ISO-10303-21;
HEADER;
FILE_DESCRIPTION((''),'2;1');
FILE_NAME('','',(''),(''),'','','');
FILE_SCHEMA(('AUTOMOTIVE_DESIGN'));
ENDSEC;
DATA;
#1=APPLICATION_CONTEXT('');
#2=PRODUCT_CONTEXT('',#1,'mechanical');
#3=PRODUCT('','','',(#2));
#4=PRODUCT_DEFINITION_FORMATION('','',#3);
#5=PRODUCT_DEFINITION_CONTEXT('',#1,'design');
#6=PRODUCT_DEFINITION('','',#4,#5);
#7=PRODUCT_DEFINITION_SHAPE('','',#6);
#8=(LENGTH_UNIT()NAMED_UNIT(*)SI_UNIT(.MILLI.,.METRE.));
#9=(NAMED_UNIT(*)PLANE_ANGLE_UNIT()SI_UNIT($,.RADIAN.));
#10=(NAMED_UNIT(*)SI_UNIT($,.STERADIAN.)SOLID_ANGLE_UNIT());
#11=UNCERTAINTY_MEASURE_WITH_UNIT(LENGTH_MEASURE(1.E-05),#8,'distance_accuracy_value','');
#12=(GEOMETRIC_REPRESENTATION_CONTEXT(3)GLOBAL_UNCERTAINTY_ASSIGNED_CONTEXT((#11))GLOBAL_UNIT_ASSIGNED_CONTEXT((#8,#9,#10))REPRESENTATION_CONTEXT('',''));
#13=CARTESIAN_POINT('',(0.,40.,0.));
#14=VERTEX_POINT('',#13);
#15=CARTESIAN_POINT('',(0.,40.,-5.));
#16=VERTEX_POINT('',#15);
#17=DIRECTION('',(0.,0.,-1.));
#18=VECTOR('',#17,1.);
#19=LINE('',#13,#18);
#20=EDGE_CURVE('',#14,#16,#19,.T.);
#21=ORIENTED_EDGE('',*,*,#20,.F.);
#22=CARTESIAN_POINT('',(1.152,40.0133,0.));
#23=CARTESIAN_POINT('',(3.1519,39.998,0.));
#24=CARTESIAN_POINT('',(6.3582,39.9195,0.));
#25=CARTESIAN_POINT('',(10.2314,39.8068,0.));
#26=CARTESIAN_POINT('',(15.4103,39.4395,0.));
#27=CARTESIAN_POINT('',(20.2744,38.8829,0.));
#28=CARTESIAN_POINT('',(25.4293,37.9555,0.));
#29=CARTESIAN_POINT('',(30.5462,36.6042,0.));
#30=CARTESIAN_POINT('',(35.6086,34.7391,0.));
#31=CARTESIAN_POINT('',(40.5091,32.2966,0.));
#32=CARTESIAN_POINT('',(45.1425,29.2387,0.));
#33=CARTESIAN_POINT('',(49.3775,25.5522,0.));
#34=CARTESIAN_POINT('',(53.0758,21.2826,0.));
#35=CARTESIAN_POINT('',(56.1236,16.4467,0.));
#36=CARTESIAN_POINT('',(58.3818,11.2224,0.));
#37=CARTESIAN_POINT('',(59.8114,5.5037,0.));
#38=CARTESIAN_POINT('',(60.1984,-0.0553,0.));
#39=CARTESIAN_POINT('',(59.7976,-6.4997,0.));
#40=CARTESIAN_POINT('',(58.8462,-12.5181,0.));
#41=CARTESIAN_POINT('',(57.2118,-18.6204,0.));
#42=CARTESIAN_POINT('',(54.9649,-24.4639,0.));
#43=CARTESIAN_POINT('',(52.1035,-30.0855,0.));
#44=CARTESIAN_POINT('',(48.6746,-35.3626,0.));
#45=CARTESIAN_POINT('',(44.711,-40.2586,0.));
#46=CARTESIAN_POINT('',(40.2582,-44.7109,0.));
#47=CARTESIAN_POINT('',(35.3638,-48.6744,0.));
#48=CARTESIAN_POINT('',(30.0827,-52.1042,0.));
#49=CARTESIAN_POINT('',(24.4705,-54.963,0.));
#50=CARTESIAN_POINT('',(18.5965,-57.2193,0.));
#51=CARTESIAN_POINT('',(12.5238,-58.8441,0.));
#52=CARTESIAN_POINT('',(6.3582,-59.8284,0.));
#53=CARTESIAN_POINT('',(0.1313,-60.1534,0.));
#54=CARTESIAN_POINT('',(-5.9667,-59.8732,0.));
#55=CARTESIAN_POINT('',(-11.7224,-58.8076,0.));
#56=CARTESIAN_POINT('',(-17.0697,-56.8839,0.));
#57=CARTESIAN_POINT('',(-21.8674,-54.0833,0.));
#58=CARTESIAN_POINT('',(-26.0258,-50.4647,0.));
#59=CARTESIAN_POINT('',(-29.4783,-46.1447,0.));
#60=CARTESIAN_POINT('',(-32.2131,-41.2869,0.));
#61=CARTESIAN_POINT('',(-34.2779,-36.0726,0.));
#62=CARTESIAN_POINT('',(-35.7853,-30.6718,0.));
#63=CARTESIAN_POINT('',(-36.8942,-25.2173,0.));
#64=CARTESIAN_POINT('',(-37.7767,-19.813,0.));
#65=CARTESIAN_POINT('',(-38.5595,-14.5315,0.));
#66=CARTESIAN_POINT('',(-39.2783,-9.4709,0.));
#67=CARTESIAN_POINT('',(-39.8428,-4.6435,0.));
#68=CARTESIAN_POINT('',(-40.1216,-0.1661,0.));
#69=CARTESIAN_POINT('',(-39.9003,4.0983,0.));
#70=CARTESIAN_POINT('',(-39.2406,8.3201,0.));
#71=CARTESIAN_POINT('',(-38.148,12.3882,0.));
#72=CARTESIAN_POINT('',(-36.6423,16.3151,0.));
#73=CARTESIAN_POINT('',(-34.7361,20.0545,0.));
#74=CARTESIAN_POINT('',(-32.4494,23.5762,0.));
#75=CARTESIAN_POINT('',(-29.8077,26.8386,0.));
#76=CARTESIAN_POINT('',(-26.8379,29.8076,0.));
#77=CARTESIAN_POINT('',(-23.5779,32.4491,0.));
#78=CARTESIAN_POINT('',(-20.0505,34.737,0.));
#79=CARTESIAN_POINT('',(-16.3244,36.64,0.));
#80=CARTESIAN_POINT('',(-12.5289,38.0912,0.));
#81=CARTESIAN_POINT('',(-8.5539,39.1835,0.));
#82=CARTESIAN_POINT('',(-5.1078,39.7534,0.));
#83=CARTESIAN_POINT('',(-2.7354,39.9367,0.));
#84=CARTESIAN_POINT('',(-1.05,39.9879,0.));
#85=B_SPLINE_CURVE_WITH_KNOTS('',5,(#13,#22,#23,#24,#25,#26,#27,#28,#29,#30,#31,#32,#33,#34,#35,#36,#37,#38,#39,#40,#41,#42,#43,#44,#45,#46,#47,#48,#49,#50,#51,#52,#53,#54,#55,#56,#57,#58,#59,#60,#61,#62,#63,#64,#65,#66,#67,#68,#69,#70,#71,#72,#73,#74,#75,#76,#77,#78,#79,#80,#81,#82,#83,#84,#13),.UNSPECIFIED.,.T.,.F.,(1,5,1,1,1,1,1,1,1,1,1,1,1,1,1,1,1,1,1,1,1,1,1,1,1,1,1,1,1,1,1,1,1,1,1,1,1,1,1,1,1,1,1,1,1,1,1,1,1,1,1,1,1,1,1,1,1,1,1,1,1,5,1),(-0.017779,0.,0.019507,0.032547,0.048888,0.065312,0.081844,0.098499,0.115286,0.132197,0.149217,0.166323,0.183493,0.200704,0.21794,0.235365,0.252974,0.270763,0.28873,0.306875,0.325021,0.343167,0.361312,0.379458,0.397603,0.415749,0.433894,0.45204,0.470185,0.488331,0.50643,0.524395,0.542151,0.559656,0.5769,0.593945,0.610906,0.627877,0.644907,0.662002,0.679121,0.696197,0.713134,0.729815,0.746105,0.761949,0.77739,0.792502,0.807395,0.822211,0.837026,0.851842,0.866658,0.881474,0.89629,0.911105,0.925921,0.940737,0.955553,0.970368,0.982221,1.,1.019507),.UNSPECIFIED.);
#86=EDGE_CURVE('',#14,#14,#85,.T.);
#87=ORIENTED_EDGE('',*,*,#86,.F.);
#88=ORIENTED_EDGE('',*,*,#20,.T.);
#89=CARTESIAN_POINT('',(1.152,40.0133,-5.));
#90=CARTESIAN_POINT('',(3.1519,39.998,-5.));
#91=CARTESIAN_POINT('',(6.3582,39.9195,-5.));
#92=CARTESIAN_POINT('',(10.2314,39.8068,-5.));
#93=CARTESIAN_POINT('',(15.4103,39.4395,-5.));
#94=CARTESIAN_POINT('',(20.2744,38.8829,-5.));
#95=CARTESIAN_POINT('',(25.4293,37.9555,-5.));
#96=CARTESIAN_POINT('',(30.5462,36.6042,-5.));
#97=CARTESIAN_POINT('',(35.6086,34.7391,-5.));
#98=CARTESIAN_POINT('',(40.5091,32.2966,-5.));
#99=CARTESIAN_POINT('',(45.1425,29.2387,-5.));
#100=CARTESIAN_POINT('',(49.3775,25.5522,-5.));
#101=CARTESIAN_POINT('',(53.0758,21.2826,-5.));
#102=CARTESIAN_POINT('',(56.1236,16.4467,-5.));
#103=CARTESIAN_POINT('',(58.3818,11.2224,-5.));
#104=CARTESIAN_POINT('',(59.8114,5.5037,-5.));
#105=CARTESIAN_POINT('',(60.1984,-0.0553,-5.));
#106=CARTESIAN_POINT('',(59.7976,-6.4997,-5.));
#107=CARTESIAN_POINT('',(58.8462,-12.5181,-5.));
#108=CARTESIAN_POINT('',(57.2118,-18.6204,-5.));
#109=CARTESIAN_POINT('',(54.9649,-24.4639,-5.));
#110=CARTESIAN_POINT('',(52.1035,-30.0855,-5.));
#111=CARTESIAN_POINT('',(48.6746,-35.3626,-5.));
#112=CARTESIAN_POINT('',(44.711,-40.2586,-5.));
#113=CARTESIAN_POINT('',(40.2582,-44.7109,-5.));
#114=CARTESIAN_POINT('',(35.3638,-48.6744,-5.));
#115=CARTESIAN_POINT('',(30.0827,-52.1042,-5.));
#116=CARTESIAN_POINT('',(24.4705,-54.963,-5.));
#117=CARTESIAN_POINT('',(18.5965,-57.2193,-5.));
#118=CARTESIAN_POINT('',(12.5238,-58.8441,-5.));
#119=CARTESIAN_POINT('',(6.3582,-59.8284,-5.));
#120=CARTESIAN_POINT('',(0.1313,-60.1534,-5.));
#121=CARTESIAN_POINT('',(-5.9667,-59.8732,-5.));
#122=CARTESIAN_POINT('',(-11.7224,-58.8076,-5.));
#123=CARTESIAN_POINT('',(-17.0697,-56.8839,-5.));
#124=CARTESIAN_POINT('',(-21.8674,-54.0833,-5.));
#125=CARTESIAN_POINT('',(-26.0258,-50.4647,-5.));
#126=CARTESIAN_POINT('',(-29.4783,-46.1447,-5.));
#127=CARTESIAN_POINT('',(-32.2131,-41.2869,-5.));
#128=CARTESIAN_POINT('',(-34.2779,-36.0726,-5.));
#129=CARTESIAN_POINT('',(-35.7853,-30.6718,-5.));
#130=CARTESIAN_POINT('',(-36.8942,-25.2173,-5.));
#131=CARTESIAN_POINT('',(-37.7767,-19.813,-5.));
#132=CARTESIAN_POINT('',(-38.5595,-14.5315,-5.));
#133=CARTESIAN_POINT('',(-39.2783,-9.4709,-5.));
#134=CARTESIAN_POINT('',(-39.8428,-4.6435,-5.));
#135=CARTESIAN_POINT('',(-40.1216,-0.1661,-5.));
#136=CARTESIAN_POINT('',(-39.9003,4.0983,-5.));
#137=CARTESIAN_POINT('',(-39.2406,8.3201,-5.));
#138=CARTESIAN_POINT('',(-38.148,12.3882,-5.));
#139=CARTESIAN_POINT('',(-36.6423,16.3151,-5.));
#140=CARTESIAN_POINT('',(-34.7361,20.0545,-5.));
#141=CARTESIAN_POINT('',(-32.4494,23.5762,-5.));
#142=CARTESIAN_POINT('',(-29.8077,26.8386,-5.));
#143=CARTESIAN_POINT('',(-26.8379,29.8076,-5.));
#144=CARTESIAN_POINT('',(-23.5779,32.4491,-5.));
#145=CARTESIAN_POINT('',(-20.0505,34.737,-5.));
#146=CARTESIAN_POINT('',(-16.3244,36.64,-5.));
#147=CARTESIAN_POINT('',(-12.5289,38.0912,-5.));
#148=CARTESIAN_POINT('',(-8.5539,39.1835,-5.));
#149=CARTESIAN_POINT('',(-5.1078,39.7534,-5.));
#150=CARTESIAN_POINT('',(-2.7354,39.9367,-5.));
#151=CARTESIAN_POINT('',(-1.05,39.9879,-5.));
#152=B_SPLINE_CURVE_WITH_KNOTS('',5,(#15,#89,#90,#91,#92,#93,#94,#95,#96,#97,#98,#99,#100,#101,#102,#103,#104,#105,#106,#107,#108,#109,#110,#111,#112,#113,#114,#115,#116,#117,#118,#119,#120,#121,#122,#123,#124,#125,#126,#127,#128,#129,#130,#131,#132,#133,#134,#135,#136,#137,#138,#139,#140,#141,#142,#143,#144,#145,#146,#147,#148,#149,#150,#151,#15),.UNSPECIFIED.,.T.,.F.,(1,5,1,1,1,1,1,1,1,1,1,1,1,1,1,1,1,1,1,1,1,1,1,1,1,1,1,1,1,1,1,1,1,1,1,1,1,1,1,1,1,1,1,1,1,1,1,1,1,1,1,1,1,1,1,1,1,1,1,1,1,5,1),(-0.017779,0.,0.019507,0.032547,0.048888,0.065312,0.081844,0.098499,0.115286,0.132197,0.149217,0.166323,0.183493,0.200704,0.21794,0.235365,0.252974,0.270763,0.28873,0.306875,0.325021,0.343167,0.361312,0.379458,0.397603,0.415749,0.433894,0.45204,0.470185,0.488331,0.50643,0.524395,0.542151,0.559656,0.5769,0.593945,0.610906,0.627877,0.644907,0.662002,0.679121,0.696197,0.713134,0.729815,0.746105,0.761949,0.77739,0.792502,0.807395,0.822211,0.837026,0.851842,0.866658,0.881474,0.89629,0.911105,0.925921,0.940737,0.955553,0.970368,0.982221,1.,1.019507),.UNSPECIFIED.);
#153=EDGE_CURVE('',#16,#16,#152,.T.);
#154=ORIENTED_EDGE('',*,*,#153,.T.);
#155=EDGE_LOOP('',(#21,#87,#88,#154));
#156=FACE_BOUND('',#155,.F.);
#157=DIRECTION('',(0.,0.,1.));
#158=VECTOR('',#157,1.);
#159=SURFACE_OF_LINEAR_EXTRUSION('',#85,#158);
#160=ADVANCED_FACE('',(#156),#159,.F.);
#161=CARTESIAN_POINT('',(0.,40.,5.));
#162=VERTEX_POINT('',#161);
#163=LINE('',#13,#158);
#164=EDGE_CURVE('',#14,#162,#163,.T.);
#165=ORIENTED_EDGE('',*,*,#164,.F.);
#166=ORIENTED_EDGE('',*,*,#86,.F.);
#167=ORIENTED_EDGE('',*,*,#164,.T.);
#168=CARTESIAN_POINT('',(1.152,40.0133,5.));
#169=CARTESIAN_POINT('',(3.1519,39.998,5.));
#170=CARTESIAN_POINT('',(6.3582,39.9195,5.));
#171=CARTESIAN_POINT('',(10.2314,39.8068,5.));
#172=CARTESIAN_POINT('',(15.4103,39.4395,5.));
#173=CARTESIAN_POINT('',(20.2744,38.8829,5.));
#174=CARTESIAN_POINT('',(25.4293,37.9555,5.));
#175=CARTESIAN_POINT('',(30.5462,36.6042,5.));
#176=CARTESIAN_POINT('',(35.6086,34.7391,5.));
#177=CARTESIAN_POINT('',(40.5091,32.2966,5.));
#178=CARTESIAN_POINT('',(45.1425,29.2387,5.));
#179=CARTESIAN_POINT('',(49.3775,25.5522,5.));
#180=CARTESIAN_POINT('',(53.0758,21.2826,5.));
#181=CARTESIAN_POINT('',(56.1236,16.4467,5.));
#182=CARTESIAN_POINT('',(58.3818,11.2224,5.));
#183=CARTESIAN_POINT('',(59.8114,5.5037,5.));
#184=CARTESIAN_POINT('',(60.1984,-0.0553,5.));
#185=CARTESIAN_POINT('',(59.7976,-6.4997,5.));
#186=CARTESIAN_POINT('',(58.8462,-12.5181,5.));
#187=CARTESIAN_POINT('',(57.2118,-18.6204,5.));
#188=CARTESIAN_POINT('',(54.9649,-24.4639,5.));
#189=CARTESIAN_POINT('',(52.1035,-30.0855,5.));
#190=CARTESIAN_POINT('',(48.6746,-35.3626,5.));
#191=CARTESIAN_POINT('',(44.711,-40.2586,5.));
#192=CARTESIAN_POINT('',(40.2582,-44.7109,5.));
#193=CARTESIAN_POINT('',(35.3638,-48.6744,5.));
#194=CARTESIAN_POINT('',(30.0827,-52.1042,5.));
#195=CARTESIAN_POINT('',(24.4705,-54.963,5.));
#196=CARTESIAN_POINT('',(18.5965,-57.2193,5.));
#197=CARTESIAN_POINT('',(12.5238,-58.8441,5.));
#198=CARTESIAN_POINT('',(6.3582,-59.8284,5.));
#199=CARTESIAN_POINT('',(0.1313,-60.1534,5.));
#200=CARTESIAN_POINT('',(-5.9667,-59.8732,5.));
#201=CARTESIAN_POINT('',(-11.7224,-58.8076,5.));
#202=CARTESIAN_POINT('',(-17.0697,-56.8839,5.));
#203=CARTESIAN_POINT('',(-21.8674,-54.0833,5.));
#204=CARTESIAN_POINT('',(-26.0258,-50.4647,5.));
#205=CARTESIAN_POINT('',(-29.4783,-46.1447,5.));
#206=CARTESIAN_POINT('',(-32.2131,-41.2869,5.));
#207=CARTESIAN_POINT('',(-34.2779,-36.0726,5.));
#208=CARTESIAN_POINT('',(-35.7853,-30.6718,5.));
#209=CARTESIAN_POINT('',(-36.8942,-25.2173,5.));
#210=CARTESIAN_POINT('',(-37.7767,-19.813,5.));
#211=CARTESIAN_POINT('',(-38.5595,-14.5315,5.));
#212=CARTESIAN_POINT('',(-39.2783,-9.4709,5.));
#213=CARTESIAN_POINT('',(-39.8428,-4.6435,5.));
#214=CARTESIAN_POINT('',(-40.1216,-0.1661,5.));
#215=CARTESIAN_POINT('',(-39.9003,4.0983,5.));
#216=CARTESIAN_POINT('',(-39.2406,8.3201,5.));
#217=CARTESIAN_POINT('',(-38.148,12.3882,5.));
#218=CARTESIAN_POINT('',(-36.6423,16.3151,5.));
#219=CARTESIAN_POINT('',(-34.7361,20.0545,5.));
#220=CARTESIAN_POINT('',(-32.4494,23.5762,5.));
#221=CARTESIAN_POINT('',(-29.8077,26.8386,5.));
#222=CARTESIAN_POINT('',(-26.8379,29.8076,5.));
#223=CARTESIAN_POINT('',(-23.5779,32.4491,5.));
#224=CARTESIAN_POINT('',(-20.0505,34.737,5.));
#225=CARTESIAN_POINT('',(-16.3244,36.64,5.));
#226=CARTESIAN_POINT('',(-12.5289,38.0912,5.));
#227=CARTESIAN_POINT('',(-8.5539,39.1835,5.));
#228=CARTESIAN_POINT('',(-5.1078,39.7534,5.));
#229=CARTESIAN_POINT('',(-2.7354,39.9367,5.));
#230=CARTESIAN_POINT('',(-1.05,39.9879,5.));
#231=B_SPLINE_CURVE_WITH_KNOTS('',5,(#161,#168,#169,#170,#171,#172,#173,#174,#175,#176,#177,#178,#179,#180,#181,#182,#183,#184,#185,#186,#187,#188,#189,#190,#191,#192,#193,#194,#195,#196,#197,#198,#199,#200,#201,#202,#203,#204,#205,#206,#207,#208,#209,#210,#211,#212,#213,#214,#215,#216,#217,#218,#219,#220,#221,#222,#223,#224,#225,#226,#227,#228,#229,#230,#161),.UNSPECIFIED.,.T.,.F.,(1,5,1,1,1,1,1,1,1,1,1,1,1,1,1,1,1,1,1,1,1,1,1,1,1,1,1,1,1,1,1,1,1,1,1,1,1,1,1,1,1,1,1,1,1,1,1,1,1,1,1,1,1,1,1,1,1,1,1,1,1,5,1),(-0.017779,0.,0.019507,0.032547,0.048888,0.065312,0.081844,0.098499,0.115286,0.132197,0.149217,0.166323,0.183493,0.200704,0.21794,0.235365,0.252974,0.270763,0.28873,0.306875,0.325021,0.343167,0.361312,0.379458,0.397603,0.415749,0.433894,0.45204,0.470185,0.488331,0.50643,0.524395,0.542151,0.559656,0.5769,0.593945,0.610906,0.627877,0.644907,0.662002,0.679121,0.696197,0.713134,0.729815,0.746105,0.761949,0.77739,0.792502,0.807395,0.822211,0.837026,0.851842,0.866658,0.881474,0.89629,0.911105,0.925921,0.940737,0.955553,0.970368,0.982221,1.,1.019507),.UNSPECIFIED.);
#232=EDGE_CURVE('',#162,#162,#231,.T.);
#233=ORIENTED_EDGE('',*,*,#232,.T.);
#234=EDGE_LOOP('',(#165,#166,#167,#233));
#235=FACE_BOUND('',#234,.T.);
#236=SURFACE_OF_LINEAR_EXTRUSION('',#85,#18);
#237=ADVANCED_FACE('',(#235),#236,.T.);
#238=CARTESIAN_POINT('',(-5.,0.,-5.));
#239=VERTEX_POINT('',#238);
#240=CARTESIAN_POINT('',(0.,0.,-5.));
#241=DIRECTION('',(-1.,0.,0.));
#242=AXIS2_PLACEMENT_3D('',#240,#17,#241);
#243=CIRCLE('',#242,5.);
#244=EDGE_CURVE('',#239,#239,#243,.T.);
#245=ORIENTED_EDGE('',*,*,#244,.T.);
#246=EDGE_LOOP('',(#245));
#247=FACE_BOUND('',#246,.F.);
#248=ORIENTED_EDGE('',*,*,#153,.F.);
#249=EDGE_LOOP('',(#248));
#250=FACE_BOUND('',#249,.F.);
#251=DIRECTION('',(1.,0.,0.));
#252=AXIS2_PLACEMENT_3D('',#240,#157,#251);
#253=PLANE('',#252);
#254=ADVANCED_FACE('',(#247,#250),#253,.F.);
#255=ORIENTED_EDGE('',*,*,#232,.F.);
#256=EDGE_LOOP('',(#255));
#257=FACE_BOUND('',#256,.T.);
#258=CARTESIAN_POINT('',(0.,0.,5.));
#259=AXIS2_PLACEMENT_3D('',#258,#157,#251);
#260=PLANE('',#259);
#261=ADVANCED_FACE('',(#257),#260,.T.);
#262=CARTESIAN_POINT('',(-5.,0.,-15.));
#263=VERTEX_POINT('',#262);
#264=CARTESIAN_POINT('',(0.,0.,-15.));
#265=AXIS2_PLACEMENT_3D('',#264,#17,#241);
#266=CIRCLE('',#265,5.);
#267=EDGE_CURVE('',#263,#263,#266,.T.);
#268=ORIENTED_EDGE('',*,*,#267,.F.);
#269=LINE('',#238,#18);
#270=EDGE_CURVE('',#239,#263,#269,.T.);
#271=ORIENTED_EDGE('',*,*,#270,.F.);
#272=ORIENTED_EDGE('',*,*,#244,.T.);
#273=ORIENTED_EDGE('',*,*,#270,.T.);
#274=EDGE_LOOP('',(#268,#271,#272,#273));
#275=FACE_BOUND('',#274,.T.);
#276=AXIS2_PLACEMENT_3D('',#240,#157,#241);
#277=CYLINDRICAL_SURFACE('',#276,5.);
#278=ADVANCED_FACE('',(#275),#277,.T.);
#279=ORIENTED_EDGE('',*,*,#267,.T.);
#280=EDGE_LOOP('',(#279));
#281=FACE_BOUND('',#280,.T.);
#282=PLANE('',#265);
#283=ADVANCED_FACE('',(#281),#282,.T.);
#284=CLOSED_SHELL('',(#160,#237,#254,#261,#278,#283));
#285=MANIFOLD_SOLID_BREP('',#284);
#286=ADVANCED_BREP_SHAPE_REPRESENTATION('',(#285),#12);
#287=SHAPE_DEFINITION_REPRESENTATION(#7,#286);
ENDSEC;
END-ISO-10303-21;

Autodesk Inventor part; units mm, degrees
ref_plane "YZ Plane" through (0, 0, 0) normal (1, 0, 0) x (0, 1, 0)
ref_plane "XZ Plane" through (0, 0, 0) normal (0, 1, 0) x (-1, 0, 0)
ref_plane "XY Plane" through (0, 0, 0) normal (0, 0, 1) x (1, 0, 0)
sketch "主要草圖" plane through (0, 0, 0) normal (0, 0, 1) x (1, 0, 0)
  spline S0 degree 5 poles (0, 40) (1.152, 40.0133) (3.1519, 39.998) (6.3582, 39.9195) (10.2314, 39.8068) (15.4103, 39.4395) (20.2744, 38.8829) (25.4293, 37.9555) (30.5462, 36.6042) (35.6086, 34.7391) (40.5091, 32.2966) (45.1425, 29.2387) (49.3775, 25.5522) (53.0758, 21.2826) (56.1236, 16.4467) (58.3818, 11.2224) (59.8114, 5.5037) (60.1984, -0.0553) (59.7976, -6.4997) (58.8462, -12.5181) (57.2118, -18.6204) (54.9649, -24.4639) (52.1035, -30.0855) (48.6746, -35.3626) (44.711, -40.2586) (40.2582, -44.7109) (35.3638, -48.6744) (30.0827, -52.1042) (24.4705, -54.963) (18.5965, -57.2193) (12.5238, -58.8441) (6.3582, -59.8284) (0.1313, -60.1534) (-5.9667, -59.8732) (-11.7224, -58.8076) (-17.0697, -56.8839) (-21.8674, -54.0833) (-26.0258, -50.4647) (-29.4783, -46.1447) (-32.2131, -41.2869) (-34.2779, -36.0726) (-35.7853, -30.6718) (-36.8942, -25.2173) (-37.7767, -19.813) (-38.5595, -14.5315) (-39.2783, -9.4709) (-39.8428, -4.6435) (-40.1216, -0.1661) (-39.9003, 4.0983) (-39.2406, 8.3201) (-38.148, 12.3882) (-36.6423, 16.3151) (-34.7361, 20.0545) (-32.4494, 23.5762) (-29.8077, 26.8386) (-26.8379, 29.8076) (-23.5779, 32.4491) (-20.0505, 34.737) (-16.3244, 36.64) (-12.5289, 38.0912) (-8.5539, 39.1835) (-5.1078, 39.7534) (-2.7354, 39.9367) (-1.05, 39.9879) (0, 40) knots 0 0 0 0 0 0 0.019507 0.032547 0.048888 0.065312 0.081844 0.098499 0.115286 0.132197 0.149217 0.166323 0.183493 0.200704 0.21794 0.235365 0.252974 0.270763 0.28873 0.306875 0.325021 0.343167 0.361312 0.379458 0.397603 0.415749 0.433894 0.45204 0.470185 0.488331 0.50643 0.524395 0.542151 0.559656 0.5769 0.593945 0.610906 0.627877 0.644907 0.662002 0.679121 0.696197 0.713134 0.729815 0.746105 0.761949 0.77739 0.792502 0.807395 0.822211 0.837026 0.851842 0.866658 0.881474 0.89629 0.911105 0.925921 0.940737 0.955553 0.970368 0.982221 1 1 1 1 1 1
  point P0 (10.067, 39.766)
  point P1 (15.1278, 39.411)
  point P2 (20.2181, 38.8077)
  point P3 (25.3322, 37.8692)
  point P4 (30.4406, 36.5048)
  point P5 (35.4839, 34.6313)
  point P6 (40.3726, 32.1829)
  point P7 (44.9919, 29.1205)
  point P8 (49.2108, 25.4387)
  point P9 (52.8936, 21.1686)
  point P10 (55.9114, 16.3778)
  point P11 (58.1532, 11.1662)
  point P12 (59.5338, 5.6591)
  point P13 (60, 0)
  point P14 (59.6713, -6.2717)
  point P15 (58.6889, -12.4747)
  point P16 (57.0634, -18.541)
  point P17 (54.8127, -24.4042)
  point P18 (51.9615, -30)
  point P19 (48.541, -35.2671)
  point P20 (44.5887, -40.1478)
  point P21 (40.1478, -44.5887)
  point P22 (35.2671, -48.541)
  point P23 (30, -51.9615)
  point P24 (24.4042, -54.8127)
  point P25 (18.541, -57.0634)
  point P26 (12.4747, -58.6889)
  point P27 (6.2717, -59.6713)
  point P28 (0, -60)
  point P29 (-6.1113, -59.6506)
  point P30 (-11.8257, -58.5375)
  point P31 (-17.0628, -56.6053)
  point P32 (-21.7527, -53.8484)
  point P33 (-25.8373, -50.3039)
  point P34 (-29.2686, -46.0562)
  point P35 (-32.0239, -41.2436)
  point P36 (-34.1331, -36.0417)
  point P37 (-35.6934, -30.6253)
  point P38 (-36.8547, -25.134)
  point P39 (-37.7783, -19.6692)
  point P40 (-38.5803, -14.3239)
  point P41 (-39.2811, -9.2027)
  point P42 (-39.7987, -4.4042)
  point P43 (-40, 0)
  point P44 (-39.7809, 4.1811)
  point P45 (-39.1259, 8.3165)
  point P46 (-38.0423, 12.3607)
  point P47 (-36.5418, 16.2695)
  point P48 (-34.641, 20)
  point P49 (-32.3607, 23.5114)
  point P50 (-29.7258, 26.7652)
  point P51 (-26.7652, 29.7258)
  point P52 (-23.5114, 32.3607)
  point P53 (-20, 34.641)
  point P54 (-16.2695, 36.5418)
  point P55 (-12.3607, 38.0423)
  point P56 (-8.3165, 39.1259)
  point P57 (-4.1811, 39.7809)
extrude "凸輪" add sketch "主要草圖" along normal mid plane 10
sketch "草圖2" plane through (0, 0, -5) normal (0, 0, -1) x (-1, 0, 0)
  circle A0 centre (0, 0) radius 5
  dimension "d4" = 10
extrude "擠出2" add sketch "草圖2" along normal blind 10
properties part number "凸輪" material "Stainless Steel, Austenitic"
